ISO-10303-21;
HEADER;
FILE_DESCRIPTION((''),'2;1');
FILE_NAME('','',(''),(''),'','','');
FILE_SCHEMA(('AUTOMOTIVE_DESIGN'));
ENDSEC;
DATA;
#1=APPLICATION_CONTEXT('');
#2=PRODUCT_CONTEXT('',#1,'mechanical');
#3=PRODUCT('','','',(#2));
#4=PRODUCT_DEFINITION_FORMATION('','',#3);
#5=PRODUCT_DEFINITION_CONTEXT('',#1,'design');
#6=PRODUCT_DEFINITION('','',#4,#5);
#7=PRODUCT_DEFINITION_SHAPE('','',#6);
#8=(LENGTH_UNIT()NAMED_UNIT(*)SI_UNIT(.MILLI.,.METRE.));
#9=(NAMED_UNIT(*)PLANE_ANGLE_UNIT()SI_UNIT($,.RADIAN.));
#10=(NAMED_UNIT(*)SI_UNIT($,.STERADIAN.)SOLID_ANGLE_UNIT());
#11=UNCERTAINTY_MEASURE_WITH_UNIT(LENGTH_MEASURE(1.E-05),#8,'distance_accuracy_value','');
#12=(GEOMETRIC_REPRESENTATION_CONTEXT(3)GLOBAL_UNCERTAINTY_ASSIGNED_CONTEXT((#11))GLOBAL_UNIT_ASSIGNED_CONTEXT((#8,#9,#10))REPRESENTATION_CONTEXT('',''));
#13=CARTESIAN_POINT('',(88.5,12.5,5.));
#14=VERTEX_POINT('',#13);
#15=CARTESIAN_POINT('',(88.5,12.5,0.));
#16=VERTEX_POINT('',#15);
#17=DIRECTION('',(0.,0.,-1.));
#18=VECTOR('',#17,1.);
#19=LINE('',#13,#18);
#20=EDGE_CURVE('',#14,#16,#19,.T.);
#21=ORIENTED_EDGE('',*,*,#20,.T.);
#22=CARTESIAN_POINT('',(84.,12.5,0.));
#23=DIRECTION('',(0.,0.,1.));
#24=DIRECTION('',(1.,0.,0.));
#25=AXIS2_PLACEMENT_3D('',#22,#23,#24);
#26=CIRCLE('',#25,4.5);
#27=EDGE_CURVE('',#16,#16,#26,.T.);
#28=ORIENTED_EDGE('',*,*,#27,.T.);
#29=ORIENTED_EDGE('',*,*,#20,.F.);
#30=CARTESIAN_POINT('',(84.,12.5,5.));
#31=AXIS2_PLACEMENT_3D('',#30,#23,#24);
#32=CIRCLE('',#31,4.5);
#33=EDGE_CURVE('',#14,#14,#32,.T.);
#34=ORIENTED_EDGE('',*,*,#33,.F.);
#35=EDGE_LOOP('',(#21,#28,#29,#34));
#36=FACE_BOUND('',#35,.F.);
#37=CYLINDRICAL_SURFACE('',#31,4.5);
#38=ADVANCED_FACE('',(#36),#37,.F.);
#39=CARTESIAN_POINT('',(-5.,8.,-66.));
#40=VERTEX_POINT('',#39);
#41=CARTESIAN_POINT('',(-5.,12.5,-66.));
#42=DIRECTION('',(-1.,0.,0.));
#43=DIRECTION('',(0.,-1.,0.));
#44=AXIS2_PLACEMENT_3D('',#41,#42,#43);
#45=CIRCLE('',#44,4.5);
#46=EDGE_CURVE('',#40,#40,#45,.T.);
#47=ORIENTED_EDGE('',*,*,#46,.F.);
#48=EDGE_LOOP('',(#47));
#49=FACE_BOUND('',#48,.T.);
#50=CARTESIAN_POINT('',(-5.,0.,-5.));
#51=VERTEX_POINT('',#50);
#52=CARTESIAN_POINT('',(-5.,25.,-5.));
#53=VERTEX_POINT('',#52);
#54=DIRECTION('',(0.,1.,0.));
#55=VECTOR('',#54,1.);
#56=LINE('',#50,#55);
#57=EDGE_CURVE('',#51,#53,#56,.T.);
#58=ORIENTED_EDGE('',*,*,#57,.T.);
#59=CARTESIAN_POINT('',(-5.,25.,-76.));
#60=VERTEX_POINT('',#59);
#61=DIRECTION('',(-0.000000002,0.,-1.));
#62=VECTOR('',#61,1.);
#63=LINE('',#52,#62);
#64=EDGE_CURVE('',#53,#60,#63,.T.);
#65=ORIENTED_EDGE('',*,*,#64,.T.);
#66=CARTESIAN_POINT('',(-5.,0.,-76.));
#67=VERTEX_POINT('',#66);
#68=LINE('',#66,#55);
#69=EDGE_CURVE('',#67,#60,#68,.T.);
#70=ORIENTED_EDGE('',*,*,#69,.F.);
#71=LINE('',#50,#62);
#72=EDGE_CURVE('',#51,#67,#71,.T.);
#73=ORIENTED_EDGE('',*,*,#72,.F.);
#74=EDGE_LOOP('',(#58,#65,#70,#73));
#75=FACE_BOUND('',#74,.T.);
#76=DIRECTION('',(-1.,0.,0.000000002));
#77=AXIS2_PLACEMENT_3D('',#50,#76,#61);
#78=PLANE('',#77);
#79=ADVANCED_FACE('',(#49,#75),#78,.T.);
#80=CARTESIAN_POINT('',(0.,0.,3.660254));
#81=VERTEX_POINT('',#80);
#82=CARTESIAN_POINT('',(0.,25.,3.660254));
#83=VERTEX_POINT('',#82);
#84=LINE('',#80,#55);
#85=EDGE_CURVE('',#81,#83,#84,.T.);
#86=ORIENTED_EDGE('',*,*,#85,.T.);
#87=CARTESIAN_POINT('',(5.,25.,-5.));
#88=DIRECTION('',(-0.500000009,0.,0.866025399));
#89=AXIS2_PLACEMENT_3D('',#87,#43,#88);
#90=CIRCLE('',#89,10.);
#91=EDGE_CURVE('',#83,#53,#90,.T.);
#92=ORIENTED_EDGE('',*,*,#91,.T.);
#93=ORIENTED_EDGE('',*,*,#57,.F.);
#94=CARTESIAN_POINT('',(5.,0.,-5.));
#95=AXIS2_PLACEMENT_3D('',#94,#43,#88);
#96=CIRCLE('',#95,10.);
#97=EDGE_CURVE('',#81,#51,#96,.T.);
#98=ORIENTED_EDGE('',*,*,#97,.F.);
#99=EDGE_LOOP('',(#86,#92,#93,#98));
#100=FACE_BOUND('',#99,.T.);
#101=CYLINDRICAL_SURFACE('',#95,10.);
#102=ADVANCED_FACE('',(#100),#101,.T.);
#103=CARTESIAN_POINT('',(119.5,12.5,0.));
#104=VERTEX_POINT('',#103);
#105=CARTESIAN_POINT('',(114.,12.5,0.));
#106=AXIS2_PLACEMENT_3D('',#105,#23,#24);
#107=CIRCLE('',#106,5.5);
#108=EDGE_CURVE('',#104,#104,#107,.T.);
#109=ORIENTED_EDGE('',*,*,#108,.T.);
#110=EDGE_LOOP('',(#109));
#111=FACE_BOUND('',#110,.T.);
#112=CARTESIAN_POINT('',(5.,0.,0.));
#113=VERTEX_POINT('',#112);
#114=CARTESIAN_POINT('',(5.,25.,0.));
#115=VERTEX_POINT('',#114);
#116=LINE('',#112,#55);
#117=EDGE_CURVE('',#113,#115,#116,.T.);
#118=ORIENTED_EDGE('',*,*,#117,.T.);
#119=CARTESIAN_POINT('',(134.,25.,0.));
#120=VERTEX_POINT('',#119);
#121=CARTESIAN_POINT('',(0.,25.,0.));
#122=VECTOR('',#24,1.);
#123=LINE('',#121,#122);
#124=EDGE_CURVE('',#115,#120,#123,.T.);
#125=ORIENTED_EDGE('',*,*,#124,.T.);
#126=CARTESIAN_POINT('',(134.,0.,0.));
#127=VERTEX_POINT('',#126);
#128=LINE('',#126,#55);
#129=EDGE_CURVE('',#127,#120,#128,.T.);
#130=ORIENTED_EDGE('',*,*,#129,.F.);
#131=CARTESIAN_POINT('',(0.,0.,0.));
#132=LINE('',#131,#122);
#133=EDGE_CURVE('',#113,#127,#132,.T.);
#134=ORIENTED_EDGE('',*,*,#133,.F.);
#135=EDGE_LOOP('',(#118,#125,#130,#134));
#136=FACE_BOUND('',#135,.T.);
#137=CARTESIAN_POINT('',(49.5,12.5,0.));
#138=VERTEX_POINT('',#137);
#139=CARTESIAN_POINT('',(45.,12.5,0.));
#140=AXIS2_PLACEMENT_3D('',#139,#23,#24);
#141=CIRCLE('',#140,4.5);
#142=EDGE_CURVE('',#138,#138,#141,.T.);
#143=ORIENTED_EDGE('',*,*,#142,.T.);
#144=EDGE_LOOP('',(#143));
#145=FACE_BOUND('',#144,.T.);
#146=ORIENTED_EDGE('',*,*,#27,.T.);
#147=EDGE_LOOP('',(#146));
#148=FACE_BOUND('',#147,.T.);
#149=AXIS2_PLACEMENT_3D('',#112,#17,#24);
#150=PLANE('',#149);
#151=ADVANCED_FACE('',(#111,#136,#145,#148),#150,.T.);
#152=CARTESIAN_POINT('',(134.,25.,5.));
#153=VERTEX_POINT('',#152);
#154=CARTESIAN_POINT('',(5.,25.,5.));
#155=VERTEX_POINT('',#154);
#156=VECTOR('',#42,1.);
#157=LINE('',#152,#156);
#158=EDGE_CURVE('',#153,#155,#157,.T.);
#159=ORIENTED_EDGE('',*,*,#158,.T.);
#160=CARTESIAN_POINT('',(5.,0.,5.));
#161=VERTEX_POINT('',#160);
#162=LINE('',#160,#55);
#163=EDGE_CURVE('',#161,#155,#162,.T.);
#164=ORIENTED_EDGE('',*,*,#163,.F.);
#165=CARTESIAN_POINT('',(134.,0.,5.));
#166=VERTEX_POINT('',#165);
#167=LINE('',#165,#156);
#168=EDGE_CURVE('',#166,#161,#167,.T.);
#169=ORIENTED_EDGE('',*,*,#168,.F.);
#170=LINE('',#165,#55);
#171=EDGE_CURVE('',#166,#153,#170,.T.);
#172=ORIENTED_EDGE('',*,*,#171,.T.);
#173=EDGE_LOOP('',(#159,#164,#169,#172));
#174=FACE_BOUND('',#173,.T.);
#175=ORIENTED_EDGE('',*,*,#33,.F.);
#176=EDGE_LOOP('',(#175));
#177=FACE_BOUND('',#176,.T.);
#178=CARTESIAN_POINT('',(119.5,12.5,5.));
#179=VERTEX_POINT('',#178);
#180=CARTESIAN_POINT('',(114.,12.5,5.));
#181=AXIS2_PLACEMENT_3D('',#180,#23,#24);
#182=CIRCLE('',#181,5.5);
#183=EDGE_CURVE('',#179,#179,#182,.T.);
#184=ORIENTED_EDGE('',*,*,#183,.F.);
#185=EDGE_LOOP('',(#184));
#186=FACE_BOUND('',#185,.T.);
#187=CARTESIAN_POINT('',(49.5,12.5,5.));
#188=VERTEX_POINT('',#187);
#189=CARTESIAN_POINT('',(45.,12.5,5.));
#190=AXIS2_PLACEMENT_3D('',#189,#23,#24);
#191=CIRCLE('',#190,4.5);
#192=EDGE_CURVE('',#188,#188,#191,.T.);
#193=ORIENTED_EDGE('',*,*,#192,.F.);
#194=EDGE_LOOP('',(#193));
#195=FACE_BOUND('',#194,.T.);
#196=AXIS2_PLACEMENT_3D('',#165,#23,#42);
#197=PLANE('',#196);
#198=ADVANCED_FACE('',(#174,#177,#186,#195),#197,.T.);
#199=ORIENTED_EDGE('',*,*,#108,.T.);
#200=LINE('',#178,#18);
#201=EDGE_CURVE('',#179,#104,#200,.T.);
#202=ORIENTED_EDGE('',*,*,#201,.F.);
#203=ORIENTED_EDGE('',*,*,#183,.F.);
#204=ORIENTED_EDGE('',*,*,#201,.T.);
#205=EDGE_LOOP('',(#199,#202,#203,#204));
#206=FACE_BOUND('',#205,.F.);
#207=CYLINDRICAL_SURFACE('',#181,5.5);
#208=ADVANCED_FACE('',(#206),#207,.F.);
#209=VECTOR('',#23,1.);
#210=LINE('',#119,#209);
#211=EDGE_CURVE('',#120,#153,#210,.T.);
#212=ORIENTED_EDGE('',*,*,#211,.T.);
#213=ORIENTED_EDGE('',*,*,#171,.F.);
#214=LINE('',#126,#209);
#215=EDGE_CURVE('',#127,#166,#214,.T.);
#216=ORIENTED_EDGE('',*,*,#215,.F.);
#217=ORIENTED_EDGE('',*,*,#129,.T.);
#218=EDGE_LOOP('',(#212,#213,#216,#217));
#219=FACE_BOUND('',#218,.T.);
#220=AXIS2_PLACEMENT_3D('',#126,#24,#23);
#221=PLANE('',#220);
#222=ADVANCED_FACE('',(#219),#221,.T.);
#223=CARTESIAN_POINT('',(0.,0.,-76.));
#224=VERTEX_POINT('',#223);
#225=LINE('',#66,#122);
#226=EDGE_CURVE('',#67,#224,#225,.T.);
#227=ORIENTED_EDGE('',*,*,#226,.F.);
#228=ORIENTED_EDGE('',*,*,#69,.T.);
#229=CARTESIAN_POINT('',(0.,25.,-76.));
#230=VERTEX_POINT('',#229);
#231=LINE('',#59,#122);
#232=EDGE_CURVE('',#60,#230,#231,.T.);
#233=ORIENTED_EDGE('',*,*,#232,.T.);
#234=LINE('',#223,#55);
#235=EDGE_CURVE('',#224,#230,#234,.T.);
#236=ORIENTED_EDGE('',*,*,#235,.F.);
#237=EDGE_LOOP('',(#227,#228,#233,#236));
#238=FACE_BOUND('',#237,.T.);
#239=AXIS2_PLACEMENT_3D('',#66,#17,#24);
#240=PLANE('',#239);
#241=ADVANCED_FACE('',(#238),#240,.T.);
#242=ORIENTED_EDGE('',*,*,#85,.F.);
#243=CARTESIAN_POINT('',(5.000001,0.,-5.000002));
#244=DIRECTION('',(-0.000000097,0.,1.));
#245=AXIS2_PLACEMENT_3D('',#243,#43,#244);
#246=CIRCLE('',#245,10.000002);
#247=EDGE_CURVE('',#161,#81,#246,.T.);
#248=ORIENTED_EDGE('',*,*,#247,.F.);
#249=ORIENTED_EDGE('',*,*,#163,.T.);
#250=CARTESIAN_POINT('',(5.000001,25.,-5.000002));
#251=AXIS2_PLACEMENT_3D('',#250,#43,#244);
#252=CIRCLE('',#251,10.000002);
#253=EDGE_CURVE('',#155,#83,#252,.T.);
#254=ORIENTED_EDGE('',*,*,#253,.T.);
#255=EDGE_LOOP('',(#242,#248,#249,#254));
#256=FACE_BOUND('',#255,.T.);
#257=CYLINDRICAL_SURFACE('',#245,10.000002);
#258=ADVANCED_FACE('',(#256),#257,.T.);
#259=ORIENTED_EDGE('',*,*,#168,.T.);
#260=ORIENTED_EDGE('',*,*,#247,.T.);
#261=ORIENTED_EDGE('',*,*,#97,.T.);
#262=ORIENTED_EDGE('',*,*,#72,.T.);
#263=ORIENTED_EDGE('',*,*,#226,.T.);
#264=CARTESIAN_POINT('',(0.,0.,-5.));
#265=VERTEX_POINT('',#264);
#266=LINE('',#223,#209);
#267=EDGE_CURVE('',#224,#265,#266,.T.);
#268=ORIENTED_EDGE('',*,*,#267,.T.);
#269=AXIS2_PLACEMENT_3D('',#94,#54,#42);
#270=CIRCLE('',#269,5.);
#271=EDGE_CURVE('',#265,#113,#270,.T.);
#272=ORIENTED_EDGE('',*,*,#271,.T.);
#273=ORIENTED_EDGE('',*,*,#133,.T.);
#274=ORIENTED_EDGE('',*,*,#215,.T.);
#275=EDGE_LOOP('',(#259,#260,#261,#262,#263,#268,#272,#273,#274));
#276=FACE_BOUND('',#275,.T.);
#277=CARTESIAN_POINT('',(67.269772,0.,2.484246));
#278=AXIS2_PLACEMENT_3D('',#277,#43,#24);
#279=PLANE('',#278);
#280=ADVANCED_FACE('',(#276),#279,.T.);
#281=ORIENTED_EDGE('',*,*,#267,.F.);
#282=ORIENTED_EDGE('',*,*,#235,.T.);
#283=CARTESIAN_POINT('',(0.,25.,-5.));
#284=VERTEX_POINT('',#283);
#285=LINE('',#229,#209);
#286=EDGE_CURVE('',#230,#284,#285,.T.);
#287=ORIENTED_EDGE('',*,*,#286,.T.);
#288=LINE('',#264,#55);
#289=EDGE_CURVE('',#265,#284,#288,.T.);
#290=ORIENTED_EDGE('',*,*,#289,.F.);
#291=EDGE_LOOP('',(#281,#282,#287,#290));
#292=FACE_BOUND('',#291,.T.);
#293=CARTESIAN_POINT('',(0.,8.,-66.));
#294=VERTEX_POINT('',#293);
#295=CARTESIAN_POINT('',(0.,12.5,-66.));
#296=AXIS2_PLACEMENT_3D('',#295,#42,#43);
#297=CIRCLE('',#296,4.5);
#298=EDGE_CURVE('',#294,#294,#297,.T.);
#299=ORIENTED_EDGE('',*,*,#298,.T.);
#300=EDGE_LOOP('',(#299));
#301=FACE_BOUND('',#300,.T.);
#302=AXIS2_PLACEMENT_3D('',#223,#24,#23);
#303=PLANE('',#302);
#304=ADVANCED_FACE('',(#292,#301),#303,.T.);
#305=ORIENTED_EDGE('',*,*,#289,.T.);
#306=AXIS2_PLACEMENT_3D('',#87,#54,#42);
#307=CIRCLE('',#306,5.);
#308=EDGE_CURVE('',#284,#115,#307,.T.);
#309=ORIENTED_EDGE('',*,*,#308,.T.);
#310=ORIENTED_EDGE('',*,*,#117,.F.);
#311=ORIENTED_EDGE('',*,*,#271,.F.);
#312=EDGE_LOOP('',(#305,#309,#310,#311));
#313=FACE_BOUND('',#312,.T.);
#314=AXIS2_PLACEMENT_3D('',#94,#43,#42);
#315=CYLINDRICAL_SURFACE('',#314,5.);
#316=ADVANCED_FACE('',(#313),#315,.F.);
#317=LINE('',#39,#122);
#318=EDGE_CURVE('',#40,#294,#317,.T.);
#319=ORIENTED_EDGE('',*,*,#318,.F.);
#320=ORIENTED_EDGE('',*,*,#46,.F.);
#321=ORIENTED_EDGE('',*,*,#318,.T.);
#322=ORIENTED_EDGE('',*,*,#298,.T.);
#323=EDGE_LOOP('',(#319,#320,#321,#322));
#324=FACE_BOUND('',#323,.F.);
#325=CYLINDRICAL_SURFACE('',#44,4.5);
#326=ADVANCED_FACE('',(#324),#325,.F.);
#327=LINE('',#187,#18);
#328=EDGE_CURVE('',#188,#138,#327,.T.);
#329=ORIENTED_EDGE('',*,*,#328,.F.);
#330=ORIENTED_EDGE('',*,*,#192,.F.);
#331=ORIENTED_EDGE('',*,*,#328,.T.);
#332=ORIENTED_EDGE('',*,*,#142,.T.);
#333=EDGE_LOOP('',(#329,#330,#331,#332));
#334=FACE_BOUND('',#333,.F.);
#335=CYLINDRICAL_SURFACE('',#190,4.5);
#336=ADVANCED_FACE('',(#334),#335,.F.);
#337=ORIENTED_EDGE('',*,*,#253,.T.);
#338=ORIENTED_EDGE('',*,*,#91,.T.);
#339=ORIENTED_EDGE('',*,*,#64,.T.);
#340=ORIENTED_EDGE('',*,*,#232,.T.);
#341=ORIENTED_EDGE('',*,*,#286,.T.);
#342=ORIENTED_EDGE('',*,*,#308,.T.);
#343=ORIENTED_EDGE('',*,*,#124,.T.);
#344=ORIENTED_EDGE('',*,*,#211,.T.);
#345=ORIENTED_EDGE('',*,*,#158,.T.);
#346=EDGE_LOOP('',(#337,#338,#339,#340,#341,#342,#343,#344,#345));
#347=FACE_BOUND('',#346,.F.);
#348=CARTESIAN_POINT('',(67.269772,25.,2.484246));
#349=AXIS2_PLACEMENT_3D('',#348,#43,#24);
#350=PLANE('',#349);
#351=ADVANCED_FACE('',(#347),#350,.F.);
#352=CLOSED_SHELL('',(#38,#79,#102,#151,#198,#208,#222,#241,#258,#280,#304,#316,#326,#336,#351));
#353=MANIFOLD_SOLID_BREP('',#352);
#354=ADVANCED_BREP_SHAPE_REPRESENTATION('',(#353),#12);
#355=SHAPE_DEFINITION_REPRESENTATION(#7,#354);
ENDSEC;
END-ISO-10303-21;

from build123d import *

# Parameters (mm, degrees)
F1_DEPTH = 25
F2_R     = 5.5
F2_R_2   = 4.5
F3_DEPTH = 5
F4_DEPTH = 5
F5_R     = 4.5
F6_DEPTH = 5


# Not quite as in the source:
# - ends of sketch curves that miss each other by under 0.0002 mm in the source are joined


with BuildPart() as f1:
    # F0 (on Front) → F1 (new body)
    with BuildSketch(Plane.XZ):
        with BuildLine():
            Line((134, 0), (134, 5))
            Line((134, 5), (5, 5))
            ThreePointArc((5, 5), (2.4118095455, 4.6592580848), (0, 3.6602538402))
            Line((0, 3.6602538402), (0, 0))
            Line((0, 0), (5, 0))
            Line((5, 0), (134, 0))
        make_face()
        with BuildLine():
            Line((0, 0), (0, 3.6602538402))
            ThreePointArc((0, 3.6602538402), (-3.6602539143, -1.284e-07), (-4.9999998289, -5))
            Line((-4.9999998289, -5), (-5, -76))
            Line((-5, -76), (0, -76))
            Line((0, -76), (0, -5))
            Line((0, -5), (0, 0))
        make_face()
        with BuildLine():
            ThreePointArc((0, -5), (1.4644660941, -1.4644660941), (5, 0))
            Line((5, 0), (0, 0))
            Line((0, 0), (0, -5))
        make_face()
    extrude(amount=-F1_DEPTH)

    # F2 (on face) → F3 (cut)
    with BuildSketch(Plane.XY.offset(5)):
        with Locations((114, 12.5)):
            Circle(F2_R)
        with Locations((84, 12.5)):
            Circle(F2_R_2)
        with Locations((45, 12.5)):
            Circle(F2_R_2)
    extrude(amount=-F3_DEPTH, mode=Mode.SUBTRACT)

    # F2 (on face) → F4 (cut)
    with BuildSketch(Plane.XY.offset(5)):
        with Locations((114, 12.5)):
            Circle(F2_R)
        with Locations((84, 12.5)):
            Circle(F2_R_2)
        with Locations((45, 12.5)):
            Circle(F2_R_2)
    extrude(amount=-F4_DEPTH, mode=Mode.SUBTRACT)

    # F5 (on face) → F6 (cut)
    with BuildSketch(Plane(origin=(-5, 0, 0), x_dir=(0, -1, 0), z_dir=(-1, 0, 0))):
        with Locations((-12.5, -66)):
            Circle(F5_R)
    extrude(amount=-F6_DEPTH, mode=Mode.SUBTRACT)


solid = f1.part
